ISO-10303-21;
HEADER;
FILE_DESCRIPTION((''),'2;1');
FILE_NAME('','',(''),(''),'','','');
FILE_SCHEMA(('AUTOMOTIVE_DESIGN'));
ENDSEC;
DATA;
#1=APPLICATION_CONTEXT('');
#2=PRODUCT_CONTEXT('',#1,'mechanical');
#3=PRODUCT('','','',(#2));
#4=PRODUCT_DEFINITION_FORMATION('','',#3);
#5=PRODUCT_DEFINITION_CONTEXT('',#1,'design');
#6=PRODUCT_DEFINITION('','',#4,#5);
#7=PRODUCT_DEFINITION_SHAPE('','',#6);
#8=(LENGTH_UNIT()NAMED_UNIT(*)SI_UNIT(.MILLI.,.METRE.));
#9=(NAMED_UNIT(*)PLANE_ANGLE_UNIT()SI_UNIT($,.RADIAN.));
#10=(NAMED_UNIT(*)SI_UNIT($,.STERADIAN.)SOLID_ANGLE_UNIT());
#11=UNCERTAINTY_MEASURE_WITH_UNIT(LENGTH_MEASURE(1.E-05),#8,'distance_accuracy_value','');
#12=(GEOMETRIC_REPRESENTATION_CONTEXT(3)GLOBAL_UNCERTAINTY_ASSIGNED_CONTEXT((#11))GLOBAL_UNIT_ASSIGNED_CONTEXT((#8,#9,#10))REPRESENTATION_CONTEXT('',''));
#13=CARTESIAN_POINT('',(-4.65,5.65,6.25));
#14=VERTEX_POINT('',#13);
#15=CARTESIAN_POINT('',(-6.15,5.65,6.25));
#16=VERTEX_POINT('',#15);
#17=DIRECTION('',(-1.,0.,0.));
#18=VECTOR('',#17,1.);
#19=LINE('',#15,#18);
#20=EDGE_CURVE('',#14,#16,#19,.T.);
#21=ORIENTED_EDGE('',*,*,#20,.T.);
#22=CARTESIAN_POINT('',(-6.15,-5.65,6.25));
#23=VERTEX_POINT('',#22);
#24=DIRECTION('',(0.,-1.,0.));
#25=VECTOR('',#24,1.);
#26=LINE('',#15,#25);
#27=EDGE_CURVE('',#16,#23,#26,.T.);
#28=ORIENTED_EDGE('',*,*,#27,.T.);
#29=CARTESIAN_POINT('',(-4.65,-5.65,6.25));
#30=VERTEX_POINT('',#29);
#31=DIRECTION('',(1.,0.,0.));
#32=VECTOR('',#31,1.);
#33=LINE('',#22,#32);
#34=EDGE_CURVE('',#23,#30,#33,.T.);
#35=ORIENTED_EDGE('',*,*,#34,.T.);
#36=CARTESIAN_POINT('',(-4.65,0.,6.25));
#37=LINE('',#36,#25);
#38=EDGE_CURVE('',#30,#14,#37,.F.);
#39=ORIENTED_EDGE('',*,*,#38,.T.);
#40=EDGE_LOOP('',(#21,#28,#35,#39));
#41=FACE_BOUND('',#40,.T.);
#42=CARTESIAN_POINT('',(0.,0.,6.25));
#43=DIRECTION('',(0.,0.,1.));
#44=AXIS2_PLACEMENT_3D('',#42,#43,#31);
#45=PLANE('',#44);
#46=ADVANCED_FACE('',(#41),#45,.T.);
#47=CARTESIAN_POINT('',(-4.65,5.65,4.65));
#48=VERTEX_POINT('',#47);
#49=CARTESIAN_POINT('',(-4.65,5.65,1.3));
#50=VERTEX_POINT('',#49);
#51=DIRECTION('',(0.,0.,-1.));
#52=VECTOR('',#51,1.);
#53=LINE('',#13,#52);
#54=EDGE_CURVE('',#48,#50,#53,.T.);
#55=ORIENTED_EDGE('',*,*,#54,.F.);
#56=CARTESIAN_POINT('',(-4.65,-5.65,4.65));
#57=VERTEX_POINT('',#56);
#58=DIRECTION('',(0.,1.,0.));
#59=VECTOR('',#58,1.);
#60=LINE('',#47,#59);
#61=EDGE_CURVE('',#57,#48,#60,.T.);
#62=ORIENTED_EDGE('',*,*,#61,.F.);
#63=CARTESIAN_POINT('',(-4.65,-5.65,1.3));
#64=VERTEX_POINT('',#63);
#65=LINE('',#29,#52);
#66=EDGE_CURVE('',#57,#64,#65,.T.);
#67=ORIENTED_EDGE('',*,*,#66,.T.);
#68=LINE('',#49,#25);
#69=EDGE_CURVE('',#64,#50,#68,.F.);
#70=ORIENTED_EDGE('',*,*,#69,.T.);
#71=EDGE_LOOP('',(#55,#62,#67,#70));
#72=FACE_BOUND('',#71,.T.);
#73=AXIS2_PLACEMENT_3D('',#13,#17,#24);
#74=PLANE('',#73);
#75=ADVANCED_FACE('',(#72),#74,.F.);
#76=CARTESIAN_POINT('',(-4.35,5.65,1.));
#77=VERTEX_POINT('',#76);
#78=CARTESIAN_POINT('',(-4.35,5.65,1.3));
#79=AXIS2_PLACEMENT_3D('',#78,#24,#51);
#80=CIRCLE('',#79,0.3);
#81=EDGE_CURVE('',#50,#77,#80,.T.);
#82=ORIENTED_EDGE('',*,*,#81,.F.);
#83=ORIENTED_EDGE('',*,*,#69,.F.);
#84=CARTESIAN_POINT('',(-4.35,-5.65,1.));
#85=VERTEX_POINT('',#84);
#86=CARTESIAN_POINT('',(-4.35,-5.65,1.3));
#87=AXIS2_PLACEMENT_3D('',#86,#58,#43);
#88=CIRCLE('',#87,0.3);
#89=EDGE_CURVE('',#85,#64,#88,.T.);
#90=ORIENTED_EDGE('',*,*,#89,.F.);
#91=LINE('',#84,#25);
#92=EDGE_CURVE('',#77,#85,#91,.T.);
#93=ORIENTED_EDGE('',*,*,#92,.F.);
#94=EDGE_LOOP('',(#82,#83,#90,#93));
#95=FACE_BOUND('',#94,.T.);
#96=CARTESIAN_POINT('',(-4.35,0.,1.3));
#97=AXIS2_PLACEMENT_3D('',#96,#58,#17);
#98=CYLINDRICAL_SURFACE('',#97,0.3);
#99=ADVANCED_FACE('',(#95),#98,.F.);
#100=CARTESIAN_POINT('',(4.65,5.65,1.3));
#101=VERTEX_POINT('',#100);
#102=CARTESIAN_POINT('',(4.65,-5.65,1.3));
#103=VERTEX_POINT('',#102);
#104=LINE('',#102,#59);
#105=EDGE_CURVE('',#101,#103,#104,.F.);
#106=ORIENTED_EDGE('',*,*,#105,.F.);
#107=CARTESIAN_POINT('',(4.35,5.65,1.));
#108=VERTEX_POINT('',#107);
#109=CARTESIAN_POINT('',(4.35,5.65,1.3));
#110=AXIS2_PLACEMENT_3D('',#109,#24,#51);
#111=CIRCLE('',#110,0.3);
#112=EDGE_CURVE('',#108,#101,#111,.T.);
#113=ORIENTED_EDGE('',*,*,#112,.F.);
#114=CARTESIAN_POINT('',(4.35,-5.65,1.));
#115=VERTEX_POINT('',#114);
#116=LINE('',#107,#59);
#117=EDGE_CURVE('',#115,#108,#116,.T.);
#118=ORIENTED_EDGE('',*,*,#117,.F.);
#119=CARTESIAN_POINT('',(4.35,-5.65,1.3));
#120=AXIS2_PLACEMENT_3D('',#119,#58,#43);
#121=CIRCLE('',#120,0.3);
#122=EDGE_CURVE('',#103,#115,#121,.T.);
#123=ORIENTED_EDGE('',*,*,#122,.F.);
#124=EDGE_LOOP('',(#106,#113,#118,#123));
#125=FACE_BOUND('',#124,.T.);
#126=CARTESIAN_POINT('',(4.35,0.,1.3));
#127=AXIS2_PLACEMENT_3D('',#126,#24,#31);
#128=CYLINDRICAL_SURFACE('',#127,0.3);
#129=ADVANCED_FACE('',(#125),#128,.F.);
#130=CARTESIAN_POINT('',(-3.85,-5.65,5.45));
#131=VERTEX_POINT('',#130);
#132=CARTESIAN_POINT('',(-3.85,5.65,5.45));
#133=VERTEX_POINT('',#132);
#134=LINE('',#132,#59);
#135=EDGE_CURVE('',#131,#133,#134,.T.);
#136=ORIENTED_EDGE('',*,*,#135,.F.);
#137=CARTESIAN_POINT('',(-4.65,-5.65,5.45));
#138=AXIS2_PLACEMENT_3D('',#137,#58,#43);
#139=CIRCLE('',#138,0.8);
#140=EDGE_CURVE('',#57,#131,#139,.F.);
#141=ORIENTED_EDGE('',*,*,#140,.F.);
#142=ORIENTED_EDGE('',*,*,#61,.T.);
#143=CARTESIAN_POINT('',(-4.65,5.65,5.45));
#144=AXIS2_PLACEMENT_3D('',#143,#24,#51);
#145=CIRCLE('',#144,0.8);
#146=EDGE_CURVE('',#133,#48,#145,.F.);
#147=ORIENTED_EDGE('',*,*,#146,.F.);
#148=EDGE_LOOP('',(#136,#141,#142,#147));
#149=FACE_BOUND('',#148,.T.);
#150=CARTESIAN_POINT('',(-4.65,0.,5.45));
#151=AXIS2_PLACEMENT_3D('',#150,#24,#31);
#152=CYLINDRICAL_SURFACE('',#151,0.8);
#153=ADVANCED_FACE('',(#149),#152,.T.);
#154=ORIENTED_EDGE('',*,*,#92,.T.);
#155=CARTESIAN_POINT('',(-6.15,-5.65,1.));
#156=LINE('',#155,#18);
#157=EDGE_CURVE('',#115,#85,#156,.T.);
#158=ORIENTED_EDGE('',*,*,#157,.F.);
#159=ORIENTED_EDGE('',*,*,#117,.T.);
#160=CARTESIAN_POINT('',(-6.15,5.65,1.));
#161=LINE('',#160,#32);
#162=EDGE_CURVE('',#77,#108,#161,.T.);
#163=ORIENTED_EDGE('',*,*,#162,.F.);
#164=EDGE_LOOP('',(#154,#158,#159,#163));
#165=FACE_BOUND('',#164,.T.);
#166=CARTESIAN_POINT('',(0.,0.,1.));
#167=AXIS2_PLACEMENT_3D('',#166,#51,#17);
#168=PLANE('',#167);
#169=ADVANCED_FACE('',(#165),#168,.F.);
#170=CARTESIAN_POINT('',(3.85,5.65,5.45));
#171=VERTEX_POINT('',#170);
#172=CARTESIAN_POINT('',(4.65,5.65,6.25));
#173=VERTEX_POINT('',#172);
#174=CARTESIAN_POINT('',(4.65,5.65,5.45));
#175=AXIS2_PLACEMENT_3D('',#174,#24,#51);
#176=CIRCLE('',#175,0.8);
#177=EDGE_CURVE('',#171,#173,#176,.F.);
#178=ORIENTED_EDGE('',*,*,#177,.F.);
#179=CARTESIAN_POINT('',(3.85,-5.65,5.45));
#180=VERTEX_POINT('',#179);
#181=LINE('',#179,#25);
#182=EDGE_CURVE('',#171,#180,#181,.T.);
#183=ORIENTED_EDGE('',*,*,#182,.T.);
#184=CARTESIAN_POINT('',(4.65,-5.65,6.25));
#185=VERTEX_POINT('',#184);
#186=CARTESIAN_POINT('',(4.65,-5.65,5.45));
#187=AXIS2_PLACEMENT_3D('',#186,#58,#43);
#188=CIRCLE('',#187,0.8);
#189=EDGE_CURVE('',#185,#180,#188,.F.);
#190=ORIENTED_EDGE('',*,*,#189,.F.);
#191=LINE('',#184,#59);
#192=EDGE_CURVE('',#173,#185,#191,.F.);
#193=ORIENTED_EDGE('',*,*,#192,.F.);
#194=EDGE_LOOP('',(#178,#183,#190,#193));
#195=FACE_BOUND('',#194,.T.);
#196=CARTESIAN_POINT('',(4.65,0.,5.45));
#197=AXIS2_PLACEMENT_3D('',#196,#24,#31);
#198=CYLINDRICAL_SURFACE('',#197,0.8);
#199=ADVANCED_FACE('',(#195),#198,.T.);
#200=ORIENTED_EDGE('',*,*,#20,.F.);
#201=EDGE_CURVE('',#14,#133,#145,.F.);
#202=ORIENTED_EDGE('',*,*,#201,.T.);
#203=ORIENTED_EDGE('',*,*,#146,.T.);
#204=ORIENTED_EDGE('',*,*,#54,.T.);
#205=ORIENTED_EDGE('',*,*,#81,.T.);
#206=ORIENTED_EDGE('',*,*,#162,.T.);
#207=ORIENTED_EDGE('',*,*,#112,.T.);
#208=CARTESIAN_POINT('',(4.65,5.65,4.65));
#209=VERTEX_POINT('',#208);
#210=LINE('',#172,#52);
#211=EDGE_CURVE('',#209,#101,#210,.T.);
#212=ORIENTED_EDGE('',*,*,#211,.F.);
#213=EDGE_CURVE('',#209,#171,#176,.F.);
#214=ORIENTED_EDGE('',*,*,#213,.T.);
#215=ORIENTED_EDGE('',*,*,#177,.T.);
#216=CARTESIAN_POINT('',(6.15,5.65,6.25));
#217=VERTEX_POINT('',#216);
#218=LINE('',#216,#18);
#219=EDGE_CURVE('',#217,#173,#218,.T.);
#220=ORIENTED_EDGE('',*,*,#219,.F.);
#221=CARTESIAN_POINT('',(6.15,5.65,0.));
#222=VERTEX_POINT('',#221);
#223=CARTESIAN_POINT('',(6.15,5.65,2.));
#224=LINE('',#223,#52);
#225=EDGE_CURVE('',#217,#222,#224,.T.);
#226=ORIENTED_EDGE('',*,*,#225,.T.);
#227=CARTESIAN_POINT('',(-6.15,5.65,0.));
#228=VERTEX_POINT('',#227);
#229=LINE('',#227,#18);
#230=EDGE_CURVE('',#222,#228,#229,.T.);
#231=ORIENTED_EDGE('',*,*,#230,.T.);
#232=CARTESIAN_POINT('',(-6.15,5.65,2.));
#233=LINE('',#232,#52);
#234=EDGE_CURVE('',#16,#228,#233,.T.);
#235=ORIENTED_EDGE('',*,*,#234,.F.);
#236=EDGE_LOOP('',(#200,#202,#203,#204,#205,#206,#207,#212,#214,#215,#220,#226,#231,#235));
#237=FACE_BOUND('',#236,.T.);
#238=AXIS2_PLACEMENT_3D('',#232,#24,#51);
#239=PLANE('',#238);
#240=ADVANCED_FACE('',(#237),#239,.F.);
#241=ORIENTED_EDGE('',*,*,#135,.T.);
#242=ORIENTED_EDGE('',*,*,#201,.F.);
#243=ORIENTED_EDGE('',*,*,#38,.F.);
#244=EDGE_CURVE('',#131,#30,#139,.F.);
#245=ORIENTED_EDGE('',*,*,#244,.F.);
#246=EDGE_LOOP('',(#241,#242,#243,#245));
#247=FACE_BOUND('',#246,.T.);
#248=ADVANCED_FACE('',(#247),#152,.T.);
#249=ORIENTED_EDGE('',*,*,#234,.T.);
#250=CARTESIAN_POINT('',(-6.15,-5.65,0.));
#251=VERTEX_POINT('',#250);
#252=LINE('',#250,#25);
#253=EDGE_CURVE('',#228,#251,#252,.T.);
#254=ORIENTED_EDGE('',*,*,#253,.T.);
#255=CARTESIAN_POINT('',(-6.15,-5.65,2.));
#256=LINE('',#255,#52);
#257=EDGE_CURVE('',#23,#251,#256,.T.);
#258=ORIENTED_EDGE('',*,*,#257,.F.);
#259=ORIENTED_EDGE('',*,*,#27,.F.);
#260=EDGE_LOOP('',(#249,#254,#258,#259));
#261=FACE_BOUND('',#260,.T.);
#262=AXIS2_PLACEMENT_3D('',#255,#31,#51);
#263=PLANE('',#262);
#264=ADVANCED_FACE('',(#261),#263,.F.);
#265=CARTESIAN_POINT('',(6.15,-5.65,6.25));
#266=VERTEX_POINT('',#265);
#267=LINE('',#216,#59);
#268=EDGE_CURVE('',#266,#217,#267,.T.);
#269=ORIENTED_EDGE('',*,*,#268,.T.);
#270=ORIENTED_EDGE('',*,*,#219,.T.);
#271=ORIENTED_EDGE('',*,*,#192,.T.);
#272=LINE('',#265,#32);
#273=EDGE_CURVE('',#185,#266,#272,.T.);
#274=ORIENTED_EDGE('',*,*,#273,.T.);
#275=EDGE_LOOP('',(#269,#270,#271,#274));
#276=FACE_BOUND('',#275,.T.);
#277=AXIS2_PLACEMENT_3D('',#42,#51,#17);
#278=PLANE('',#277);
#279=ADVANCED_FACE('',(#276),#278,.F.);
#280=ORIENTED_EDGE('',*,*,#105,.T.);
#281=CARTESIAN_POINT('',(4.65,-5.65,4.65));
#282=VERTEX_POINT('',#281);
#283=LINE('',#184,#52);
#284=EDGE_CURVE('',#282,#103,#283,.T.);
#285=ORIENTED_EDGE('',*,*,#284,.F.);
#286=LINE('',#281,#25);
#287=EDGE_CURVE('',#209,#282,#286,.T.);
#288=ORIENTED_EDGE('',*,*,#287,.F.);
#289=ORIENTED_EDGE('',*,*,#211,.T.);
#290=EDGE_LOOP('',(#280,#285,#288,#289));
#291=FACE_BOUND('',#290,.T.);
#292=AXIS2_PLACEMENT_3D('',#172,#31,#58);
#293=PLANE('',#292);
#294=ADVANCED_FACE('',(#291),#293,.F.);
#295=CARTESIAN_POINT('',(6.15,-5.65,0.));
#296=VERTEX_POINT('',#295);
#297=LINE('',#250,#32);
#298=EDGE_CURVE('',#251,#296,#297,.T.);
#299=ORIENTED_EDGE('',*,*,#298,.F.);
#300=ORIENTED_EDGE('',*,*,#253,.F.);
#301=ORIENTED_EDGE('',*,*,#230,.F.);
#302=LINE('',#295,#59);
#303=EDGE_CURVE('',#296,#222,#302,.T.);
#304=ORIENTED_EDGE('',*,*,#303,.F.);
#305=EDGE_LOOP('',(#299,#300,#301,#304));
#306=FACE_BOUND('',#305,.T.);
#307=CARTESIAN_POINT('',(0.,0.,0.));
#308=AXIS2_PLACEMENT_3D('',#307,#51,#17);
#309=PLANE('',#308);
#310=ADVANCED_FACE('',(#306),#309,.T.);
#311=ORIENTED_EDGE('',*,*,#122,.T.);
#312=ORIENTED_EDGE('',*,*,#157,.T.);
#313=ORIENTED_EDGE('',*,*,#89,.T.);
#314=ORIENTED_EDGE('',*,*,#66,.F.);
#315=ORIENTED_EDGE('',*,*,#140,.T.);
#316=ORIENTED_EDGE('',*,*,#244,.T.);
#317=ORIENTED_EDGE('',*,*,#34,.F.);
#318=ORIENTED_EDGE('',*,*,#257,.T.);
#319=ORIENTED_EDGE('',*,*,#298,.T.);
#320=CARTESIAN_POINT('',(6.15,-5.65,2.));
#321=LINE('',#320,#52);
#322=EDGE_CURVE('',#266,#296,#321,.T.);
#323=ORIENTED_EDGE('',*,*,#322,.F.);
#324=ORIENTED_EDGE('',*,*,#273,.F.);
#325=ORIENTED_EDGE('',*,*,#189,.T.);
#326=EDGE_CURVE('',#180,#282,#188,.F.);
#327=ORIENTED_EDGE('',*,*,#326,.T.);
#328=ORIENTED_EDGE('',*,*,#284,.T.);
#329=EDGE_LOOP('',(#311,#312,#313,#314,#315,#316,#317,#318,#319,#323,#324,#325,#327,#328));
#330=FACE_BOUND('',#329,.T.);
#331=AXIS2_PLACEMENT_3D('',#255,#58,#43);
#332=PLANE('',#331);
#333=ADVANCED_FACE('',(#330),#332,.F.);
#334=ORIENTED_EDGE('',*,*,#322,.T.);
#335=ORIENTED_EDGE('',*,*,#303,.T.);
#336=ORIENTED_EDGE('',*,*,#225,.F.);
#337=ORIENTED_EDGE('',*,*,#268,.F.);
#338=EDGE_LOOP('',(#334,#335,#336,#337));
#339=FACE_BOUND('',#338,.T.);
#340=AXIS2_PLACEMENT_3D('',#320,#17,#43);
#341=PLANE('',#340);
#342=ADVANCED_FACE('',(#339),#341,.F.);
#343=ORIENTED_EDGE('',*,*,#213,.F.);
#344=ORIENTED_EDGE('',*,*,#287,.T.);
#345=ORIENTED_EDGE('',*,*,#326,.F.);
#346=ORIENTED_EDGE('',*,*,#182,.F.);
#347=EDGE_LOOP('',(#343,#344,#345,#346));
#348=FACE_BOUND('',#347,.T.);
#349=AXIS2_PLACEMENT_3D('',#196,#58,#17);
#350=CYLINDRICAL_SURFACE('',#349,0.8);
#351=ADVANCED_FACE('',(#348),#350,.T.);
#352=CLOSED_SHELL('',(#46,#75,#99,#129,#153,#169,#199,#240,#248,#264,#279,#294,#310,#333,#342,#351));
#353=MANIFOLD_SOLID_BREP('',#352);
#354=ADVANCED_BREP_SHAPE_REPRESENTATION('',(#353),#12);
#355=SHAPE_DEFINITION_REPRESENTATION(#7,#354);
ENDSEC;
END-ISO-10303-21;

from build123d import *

# Parameters (mm, degrees)
SKETCH_1_W          = 12.3
SKETCH_1_H          = 11.3
EXTRUDE_1_DEPTH     = 2
SKETCH_2_W          = 1.5
SKETCH_2_H          = 11.3
EXTRUDE_2_DEPTH     = 4.25
SKETCH_5_W          = 9.3
SKETCH_5_H          = 11.5
CUT_EXTRUDE_1_DEPTH = 1
SKETCH_8_W          = 1.6
SKETCH_8_H          = 11.3
EXTRUDE_5_DEPTH     = 0.8
SKETCH_9_W          = 1.6
SKETCH_9_H          = 11.3
EXTRUDE_6_DEPTH     = 0.8
FILLET_7_R          = 0.8
FILLET_8_R          = 0.3


with BuildPart() as part:
    # 스케치1 → 보스-돌출1 (new body)
    with BuildSketch(Plane.XY):
        Rectangle(SKETCH_1_W, SKETCH_1_H)
    extrude(amount=EXTRUDE_1_DEPTH)

    # 스케치2 → 보스-돌출2 (add)
    with BuildSketch(Plane.XY.offset(2)):
        with Locations((-5.4, 0)):
            Rectangle(SKETCH_2_W, SKETCH_2_H)
        with Locations((5.4, 0)):
            Rectangle(SKETCH_2_W, SKETCH_2_H)
    extrude(amount=EXTRUDE_2_DEPTH)

    # 스케치5 → 컷-돌출1 (cut)
    with BuildSketch(Plane.XY.offset(2)):
        Rectangle(SKETCH_5_W, SKETCH_5_H)
    extrude(amount=-CUT_EXTRUDE_1_DEPTH, mode=Mode.SUBTRACT)

    # 스케치8 → 보스-돌출5 (add)
    with BuildSketch(Plane(origin=(-4.65, 0, 0), x_dir=(0, 0, -1), z_dir=(1, 0, 0))):
        with Locations((-5.45, 0)):
            Rectangle(SKETCH_8_W, SKETCH_8_H)
    extrude(amount=EXTRUDE_5_DEPTH)

    # 스케치9 → 보스-돌출6 (add)
    with BuildSketch(Plane.ZY.offset(-4.65)):
        with Locations((5.45, 0)):
            Rectangle(SKETCH_9_W, SKETCH_9_H)
    extrude(amount=EXTRUDE_6_DEPTH)

    # 필렛7
    fillet_7_edges = [part.edges().sort_by_distance(p)[0] for p in [
        (3.85, 0, 6.25),
        (-3.85, 0, 6.25),
        (3.85, 0, 4.65),
        (-3.85, 0, 4.65),
    ]]
    fillet(fillet_7_edges, radius=FILLET_7_R - 0.0001)  # a hair under: the kernel refuses the full size

    # 필렛8
    fillet_8_edges = [part.edges().sort_by_distance(p)[0] for p in [
        (4.65, 0, 1),
        (-4.65, 0, 1),
    ]]
    fillet(fillet_8_edges, radius=FILLET_8_R)


solid = part.part
